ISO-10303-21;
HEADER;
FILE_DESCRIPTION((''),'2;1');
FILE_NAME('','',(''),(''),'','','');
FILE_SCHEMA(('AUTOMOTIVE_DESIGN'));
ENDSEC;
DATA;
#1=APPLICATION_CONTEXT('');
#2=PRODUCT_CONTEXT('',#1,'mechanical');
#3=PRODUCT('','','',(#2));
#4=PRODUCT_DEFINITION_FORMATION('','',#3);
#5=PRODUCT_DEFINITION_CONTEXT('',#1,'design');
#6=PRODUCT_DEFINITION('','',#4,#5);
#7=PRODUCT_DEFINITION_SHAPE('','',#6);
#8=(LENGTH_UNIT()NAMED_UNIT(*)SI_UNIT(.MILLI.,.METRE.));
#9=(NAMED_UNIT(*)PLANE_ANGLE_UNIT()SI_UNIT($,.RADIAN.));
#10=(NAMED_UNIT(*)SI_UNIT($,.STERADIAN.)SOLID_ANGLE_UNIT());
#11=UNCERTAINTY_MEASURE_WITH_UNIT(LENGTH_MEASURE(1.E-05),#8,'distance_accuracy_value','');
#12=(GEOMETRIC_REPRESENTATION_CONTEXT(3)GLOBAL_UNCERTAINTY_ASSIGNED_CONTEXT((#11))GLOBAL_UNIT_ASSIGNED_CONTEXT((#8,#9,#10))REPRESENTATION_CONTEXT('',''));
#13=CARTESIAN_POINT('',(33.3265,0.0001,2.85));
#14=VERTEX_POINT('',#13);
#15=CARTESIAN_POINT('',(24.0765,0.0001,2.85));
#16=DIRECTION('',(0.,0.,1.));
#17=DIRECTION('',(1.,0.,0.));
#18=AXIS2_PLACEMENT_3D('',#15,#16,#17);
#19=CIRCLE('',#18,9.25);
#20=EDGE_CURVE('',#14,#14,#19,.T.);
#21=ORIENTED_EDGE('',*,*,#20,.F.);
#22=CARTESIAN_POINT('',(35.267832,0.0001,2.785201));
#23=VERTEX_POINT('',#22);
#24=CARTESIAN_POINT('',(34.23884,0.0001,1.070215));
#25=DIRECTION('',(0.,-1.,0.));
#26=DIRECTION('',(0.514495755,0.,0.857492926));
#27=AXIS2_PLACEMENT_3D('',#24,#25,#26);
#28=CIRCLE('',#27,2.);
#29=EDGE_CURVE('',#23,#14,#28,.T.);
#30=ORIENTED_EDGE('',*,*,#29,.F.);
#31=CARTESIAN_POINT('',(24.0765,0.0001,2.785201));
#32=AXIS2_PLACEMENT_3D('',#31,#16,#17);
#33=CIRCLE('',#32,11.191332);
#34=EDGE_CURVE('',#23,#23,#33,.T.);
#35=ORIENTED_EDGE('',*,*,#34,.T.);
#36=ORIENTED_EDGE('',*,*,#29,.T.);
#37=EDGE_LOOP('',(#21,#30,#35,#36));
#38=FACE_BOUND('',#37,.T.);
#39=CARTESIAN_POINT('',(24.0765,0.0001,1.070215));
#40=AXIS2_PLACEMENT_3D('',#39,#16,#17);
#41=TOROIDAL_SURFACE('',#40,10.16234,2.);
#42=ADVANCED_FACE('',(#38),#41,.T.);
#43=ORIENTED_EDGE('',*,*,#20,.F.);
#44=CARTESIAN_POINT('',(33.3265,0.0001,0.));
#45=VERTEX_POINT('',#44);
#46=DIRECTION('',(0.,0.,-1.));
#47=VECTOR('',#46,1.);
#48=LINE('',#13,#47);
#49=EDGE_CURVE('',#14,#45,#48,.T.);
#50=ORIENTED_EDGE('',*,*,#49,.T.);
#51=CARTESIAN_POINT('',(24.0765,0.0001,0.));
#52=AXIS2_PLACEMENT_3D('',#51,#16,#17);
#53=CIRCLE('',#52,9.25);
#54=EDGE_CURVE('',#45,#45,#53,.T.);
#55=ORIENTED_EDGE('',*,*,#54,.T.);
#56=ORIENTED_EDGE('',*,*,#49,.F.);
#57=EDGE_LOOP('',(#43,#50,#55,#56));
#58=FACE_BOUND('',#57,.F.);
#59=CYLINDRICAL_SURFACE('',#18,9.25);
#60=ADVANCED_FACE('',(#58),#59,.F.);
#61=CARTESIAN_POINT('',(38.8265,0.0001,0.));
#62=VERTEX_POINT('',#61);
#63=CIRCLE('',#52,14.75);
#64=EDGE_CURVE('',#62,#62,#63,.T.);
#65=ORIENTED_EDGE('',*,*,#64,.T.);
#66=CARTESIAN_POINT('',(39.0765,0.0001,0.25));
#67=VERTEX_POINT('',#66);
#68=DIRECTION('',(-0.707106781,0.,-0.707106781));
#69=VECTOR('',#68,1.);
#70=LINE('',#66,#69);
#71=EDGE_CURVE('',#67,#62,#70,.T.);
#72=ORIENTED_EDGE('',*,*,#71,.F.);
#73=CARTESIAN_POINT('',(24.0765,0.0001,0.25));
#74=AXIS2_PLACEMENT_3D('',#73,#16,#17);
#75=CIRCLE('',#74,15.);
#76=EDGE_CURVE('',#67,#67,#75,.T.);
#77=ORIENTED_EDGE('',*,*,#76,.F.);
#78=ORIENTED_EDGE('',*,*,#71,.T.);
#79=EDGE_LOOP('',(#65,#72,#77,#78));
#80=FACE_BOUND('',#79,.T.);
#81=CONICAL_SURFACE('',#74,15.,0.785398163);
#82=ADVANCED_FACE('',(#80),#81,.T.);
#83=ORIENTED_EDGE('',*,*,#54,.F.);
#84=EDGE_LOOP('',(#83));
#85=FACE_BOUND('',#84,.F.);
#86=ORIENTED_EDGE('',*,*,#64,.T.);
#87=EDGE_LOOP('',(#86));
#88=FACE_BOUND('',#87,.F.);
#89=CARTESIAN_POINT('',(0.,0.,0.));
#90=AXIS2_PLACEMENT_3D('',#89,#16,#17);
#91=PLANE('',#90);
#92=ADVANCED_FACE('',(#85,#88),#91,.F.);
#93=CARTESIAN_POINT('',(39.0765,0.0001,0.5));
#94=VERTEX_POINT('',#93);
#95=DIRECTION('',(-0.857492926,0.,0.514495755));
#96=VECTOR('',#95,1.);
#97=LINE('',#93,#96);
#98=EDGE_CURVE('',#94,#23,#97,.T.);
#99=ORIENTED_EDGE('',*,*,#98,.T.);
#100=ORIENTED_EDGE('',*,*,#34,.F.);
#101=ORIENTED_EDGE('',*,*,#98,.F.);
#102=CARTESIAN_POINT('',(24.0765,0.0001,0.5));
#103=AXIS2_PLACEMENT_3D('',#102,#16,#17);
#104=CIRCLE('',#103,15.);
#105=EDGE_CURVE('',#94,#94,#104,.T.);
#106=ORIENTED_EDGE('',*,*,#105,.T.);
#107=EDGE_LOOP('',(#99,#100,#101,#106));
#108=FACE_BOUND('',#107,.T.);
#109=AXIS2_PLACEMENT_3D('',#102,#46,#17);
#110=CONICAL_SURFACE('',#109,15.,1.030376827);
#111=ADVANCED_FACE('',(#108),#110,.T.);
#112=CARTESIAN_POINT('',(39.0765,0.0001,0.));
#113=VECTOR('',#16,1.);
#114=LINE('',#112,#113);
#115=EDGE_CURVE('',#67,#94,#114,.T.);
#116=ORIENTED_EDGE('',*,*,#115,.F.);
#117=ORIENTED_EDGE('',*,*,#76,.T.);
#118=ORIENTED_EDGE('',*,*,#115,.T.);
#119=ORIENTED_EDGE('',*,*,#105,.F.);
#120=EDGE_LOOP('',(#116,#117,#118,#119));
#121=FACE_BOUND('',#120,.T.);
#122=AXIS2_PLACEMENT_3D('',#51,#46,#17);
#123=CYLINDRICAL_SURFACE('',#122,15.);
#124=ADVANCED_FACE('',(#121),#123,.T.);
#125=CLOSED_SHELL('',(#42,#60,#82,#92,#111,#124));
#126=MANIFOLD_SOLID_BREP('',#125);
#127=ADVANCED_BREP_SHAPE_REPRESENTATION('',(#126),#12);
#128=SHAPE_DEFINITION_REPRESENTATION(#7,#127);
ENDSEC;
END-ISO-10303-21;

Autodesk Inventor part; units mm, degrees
ref_plane "YZ Plane" through (0, 0, 0) normal (1, 0, 0) x (0, 1, 0)
ref_plane "XZ Plane" through (0, 0, 0) normal (0, 1, 0) x (-1, 0, 0)
ref_plane "XY Plane" through (0, 0, 0) normal (0, 0, 1) x (1, 0, 0)
sketch "Sketch1" plane through (0, 0, 0) normal (0, 0, 1) x (1, 0, 0)
  circle A0 centre (24.0765, 0.0001) radius 15
  point P0 (0, 0)
  dimension "d0" = 30
extrude "Extrusion1" add sketch "Sketch1" along normal blind 3.5
chamfer "Chamfer1" distance 3 distance2 5 1 edges at (9.0765, 0.0001, 3.5) measured on face at (38.8822, -2.4061, 2.3333)
chamfer "Chamfer2" distance 0.25 angle 45 1 edges at (9.0765, 0.0001, 0)
sketch "Sketch2" plane through (24.0765, 0.0001, 3.5) normal (0, 0, 1) x (1, 0, 0)
  circle A0 centre (0, 0) radius 10 projected
  circle A1 centre (0, 0) radius 9.25
  point P0 (-24.0765, -0.0001)
  dimension "d9" = 18.5
extrude "Extrusion2" cut sketch "Sketch2" against normal blind 0.65 contours A1
fillet "Fillet2" radius 2 2 edges at (14.8265, 0.0001, 3.5) (14.0765, 0.0001, 3.5)
sketch "Sketch3" plane through (24.0765, 0.0001, 2.85) normal (0, 0, 1) x (1, 0, 0)
  circle A0 centre (0, 0) radius 9.25 projected
  point P0 (-24.0765, -0.0001)
extrude "Extrusion3" cut sketch "Sketch3" against normal through all
properties part number "objektiv"
